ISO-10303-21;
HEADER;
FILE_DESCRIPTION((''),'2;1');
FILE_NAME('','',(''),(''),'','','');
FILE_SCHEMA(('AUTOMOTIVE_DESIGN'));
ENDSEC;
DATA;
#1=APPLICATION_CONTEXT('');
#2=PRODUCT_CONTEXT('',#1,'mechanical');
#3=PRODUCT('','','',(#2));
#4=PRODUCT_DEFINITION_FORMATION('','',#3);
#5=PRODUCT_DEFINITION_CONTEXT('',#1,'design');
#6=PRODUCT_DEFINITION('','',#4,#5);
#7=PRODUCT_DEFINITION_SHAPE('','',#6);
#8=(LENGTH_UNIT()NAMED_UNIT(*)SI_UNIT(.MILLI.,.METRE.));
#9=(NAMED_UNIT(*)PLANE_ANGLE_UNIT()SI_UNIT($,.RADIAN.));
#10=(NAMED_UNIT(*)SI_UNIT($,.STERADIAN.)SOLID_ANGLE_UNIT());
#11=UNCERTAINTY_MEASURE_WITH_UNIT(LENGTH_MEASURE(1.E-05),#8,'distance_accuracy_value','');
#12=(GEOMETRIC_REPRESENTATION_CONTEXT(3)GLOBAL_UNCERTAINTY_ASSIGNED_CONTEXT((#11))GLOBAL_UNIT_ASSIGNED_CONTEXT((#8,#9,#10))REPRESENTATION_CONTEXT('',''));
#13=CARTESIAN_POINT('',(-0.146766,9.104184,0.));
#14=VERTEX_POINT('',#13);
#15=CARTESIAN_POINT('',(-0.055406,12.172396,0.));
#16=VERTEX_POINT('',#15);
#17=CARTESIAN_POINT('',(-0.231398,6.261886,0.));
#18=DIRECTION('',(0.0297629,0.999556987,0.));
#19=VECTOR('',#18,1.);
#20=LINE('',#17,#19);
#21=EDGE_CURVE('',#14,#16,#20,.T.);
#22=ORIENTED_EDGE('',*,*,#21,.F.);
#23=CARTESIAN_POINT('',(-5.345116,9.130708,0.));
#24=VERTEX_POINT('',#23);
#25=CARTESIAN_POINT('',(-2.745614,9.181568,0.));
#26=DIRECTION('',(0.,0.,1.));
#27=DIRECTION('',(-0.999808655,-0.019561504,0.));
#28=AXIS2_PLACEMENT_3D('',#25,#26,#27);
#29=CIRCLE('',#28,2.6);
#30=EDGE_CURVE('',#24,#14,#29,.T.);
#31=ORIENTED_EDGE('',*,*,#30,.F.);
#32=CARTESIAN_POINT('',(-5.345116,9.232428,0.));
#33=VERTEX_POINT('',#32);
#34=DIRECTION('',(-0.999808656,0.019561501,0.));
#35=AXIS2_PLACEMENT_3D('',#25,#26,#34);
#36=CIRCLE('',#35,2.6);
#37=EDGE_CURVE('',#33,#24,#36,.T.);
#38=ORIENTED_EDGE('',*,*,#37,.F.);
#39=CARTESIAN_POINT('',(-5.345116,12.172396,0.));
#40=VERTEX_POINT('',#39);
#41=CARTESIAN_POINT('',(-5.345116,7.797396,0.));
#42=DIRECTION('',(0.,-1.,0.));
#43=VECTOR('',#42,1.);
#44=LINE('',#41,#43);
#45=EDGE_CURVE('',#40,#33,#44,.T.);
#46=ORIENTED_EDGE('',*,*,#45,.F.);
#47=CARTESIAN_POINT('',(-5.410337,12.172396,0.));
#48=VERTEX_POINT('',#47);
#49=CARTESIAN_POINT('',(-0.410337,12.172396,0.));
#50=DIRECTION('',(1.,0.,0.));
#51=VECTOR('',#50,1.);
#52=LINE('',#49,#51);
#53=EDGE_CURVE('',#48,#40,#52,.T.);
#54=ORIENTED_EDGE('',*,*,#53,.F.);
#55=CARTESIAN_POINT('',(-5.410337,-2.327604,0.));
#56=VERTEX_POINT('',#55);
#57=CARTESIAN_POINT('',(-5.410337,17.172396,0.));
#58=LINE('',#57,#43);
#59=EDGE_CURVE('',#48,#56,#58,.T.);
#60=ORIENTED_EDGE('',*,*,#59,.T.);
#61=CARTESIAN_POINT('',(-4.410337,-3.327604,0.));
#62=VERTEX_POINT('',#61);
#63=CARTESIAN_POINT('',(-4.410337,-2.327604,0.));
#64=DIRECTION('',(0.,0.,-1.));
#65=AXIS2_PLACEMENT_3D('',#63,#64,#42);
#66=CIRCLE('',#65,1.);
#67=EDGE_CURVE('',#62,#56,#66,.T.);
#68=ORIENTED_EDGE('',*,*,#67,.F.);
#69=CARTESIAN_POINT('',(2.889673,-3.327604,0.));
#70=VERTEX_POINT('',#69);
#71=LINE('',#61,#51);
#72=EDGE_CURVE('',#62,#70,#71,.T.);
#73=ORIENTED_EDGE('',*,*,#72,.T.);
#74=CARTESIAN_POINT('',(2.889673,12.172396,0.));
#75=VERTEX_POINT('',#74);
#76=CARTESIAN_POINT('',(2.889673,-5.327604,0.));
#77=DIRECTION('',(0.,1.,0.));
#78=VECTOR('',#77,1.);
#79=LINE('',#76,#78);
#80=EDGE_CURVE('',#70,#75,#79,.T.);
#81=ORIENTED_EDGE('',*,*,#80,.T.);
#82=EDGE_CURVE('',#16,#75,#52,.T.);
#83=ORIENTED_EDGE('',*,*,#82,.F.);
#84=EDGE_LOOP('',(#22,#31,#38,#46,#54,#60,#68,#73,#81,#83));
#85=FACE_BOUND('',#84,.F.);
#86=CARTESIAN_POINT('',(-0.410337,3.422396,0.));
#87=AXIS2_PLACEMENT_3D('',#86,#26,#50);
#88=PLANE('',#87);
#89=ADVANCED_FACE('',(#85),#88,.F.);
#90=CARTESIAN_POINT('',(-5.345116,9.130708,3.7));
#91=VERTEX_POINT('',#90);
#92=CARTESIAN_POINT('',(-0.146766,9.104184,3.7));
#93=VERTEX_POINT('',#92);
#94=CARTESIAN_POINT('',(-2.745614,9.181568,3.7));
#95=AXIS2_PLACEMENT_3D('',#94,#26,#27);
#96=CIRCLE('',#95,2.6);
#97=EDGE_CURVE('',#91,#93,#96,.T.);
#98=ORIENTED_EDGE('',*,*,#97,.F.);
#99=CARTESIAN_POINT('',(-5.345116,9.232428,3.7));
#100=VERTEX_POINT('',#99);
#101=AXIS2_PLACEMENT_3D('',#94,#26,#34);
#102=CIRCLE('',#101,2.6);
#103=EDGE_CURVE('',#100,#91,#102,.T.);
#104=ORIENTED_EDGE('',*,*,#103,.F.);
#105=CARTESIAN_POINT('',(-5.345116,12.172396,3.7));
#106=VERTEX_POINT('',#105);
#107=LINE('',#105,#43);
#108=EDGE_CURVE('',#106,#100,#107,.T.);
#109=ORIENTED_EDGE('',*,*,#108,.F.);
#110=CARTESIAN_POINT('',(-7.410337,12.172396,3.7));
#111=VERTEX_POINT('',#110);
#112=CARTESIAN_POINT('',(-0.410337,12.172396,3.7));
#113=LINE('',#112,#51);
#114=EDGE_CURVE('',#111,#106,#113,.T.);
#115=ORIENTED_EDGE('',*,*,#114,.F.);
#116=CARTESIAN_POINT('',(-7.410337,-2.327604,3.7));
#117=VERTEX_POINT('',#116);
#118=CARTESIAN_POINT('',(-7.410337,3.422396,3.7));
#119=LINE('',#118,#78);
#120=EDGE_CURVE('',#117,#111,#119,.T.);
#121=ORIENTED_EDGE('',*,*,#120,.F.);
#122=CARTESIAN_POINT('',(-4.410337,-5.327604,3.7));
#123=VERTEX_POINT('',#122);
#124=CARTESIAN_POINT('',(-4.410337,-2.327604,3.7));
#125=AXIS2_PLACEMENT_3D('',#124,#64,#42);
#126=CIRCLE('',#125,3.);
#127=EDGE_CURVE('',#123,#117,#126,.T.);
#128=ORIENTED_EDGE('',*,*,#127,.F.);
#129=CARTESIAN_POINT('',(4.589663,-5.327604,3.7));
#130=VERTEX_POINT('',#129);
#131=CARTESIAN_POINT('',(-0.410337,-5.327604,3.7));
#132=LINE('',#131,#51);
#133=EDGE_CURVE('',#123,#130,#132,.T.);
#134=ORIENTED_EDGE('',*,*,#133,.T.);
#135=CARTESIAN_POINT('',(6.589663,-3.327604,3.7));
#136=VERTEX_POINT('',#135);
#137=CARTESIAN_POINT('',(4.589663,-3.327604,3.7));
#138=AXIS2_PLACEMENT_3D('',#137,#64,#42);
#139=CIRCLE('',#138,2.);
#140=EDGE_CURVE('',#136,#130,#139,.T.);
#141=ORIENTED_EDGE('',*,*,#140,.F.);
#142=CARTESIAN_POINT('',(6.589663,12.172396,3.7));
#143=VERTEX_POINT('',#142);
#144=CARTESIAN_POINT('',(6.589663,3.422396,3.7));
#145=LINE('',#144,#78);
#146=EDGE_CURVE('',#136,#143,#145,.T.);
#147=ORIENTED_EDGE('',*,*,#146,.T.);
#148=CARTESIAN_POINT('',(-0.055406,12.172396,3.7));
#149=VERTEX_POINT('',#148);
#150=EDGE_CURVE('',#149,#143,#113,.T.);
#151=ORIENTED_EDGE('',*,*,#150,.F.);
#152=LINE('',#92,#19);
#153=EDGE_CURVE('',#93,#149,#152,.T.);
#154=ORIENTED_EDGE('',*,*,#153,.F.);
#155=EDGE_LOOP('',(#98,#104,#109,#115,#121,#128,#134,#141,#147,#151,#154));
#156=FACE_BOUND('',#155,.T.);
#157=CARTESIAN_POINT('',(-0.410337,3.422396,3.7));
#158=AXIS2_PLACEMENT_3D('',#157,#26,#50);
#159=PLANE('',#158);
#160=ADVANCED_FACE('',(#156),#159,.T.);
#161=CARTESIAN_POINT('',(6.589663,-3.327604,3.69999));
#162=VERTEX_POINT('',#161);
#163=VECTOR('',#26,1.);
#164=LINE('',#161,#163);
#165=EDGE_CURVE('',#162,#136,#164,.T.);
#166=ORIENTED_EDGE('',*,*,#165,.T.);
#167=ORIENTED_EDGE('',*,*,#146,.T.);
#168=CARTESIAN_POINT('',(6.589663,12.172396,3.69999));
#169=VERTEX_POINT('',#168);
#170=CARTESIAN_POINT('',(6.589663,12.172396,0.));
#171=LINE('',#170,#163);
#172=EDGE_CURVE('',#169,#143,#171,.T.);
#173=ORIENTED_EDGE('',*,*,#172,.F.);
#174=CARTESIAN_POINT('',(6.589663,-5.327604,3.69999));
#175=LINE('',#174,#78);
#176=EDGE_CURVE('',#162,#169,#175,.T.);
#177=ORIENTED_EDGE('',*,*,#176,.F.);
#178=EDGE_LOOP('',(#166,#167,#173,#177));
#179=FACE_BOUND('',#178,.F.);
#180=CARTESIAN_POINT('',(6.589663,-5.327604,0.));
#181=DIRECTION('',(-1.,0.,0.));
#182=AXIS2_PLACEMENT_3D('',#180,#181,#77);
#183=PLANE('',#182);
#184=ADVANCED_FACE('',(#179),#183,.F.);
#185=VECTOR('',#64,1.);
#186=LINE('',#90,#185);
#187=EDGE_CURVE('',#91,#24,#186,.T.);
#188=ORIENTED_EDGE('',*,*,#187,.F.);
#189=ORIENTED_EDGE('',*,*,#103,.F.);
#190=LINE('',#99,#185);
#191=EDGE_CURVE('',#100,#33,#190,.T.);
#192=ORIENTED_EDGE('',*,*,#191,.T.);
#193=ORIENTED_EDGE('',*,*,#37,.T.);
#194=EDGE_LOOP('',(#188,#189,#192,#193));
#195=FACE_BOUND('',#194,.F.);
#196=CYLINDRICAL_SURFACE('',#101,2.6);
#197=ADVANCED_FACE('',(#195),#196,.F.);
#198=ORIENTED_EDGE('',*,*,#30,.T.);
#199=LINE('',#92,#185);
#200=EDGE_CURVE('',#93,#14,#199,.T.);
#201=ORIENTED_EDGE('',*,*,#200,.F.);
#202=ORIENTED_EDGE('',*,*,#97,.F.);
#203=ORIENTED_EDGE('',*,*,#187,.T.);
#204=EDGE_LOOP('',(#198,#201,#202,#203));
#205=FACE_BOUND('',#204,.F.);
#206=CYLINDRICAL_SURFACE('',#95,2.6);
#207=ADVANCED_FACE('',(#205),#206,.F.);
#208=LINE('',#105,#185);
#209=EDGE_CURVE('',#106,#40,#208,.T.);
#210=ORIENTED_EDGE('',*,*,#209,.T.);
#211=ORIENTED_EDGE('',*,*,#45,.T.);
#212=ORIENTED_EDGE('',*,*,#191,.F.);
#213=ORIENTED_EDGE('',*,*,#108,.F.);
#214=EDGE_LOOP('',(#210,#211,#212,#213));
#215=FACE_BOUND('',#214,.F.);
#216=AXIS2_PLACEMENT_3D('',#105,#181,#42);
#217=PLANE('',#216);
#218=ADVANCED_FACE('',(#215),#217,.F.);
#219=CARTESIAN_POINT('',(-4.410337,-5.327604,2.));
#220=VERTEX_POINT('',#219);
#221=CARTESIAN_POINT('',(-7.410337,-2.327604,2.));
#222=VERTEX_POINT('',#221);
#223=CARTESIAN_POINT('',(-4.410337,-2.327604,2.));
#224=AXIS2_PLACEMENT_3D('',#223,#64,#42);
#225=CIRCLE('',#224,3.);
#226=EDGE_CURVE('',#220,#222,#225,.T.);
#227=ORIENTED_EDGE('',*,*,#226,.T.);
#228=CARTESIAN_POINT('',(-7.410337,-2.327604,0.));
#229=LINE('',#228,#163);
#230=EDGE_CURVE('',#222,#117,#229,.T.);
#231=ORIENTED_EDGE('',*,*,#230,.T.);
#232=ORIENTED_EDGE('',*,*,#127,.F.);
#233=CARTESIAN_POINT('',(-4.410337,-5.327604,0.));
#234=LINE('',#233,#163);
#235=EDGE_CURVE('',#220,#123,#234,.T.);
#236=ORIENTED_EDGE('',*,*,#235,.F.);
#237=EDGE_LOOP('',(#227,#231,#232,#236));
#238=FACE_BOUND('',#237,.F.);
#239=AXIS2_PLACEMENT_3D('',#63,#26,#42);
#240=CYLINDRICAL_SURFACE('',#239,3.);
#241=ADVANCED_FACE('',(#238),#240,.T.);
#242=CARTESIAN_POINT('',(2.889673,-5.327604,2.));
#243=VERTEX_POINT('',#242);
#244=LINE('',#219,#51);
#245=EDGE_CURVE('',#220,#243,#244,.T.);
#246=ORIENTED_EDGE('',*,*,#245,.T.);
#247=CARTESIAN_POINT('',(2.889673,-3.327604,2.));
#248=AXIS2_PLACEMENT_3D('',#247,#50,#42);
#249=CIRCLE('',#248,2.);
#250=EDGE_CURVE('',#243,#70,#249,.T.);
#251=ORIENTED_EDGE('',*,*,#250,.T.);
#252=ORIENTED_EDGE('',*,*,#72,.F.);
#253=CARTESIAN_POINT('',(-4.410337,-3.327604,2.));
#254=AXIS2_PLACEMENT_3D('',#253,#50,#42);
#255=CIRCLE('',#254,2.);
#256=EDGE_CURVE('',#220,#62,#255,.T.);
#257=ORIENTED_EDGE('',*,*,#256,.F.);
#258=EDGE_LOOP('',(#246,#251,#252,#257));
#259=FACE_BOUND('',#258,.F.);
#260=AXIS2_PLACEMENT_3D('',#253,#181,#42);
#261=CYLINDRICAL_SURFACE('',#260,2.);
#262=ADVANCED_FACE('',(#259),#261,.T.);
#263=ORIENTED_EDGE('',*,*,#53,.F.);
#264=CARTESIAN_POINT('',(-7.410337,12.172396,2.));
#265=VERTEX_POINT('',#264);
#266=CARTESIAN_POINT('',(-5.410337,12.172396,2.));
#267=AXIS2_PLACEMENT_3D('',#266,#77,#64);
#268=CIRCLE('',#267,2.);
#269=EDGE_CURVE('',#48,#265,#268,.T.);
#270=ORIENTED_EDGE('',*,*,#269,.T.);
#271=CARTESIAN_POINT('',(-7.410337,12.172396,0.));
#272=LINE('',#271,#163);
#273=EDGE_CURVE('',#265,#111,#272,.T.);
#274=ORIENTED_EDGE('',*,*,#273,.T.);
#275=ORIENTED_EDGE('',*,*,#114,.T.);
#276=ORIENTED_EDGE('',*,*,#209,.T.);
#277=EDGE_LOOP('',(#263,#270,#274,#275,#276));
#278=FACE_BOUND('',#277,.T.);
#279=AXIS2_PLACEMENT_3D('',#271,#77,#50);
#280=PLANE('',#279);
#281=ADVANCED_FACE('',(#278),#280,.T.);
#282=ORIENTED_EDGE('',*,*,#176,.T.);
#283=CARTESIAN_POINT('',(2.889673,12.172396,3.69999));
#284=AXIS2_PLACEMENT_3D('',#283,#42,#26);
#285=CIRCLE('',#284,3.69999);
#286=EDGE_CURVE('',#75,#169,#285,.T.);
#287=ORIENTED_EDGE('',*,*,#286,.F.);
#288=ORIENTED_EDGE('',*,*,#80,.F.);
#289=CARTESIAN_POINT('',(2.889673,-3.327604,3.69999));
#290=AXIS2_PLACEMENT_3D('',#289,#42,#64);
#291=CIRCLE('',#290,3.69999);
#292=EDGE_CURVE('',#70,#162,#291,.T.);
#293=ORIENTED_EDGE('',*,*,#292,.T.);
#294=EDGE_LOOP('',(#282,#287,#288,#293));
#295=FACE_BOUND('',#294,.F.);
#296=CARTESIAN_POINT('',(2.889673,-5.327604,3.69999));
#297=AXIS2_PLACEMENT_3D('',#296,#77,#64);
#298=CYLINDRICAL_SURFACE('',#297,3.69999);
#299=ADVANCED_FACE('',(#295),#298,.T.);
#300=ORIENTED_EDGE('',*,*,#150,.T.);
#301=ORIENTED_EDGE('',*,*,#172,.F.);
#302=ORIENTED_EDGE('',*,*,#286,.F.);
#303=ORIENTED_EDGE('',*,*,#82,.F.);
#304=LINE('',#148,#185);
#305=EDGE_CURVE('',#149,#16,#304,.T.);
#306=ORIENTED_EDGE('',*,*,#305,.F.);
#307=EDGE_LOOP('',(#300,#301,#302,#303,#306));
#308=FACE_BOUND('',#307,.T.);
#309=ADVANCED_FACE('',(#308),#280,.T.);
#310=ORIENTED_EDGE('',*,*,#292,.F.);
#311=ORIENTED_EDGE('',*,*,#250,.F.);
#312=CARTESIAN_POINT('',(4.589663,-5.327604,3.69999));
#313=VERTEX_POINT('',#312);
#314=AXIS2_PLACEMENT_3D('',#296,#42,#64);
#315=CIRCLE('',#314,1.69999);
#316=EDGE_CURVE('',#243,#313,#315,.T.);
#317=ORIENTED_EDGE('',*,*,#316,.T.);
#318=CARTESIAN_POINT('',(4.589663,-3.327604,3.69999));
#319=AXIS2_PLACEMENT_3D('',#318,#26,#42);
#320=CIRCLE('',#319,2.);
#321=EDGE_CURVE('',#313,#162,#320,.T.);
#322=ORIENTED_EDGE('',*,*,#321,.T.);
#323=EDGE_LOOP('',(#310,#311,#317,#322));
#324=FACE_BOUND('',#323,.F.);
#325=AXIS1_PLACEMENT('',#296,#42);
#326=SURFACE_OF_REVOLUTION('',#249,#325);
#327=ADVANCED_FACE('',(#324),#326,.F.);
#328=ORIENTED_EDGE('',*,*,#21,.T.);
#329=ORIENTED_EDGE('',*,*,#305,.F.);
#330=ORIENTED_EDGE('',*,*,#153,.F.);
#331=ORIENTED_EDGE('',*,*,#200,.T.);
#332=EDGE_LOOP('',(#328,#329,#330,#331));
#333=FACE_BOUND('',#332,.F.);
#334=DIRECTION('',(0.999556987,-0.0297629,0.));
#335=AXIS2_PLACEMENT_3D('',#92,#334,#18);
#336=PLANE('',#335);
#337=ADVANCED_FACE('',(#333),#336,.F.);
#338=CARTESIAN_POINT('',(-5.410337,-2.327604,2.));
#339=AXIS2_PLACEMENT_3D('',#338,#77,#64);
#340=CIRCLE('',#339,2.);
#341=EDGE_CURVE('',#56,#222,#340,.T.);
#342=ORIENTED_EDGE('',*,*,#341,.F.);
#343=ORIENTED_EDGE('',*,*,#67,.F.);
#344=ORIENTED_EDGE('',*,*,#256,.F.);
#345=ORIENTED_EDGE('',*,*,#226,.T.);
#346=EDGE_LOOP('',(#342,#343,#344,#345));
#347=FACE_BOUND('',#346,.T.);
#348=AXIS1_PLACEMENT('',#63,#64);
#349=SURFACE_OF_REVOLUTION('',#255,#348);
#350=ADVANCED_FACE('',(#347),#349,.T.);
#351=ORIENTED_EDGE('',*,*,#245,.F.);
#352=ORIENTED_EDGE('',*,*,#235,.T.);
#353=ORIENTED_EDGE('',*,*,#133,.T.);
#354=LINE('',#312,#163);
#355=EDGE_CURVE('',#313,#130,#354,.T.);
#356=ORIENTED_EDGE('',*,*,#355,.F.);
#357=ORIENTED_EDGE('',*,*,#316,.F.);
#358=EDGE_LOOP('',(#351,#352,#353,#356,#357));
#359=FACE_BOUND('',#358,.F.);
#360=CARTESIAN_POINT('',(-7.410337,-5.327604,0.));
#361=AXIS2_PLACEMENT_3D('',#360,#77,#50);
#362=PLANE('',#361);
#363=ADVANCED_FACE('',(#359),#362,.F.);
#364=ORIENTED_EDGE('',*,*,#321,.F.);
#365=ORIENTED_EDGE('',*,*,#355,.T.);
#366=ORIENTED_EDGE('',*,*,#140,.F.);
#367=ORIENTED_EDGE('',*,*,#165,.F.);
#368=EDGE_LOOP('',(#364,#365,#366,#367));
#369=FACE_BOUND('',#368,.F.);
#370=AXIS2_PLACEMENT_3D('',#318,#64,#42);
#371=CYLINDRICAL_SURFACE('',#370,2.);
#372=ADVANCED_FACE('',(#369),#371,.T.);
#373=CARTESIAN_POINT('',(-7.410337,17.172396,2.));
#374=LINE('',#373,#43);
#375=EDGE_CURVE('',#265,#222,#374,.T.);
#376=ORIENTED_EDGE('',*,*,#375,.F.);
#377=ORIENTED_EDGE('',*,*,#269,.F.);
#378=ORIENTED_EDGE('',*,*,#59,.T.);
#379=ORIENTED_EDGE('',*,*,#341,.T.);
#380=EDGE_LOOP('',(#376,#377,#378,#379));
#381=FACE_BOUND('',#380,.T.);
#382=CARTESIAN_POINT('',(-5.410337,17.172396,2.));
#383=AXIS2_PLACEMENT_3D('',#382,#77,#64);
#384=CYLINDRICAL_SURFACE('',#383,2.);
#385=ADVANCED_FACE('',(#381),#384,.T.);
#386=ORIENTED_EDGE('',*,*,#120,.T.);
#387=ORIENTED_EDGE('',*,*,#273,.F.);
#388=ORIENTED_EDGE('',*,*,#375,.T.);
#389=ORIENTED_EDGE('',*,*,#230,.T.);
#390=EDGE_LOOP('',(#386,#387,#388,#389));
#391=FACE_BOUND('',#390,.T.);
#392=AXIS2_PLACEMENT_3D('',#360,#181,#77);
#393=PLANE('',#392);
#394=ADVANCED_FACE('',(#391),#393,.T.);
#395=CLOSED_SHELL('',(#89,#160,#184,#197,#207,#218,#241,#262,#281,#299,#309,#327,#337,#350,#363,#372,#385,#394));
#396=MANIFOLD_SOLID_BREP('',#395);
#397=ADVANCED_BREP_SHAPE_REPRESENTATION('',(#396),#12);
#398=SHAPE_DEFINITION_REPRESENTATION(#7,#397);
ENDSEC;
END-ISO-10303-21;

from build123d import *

# Parameters (mm, degrees)
F0_W         = 14
F0_H         = 17.5
F1_DEPTH     = 3.7
F3_DEPTH     = 5.4
F4_R         = 3.69999
F5_R         = 3
F6_T1_DEPTH  = 7.30001
F6_T3_DEPTH  = 5.00001
F6_T5_DEPTH  = 19.5
F6_T8_ANGLE  = 90
F6_T10_ANGLE = 90


# Not quite as in the source:
# - a fillet or chamfer that OpenCascade refuses, or shapes differently, is made with other operations: its cross-section is extruded or revolved along the edge and cut away or added
# - a fillet or chamfer is up to 0.001 mm smaller than in the source, because OpenCascade refuses the exact size


with BuildPart() as f1:
    # F0 (on Top) → F1 (new body)
    with BuildSketch(Plane.XY):
        with Locations((-0.4103374667, 3.4223956802)):
            Rectangle(F0_W, F0_H)
    extrude(amount=F1_DEPTH)

    # F2 (on face) → F3 (cut)
    with BuildSketch(Plane.XY.offset(3.7)):
        with BuildLine():
            Line((-5.3451164257, 9.1307080224), (-5.3451164257, 9.2324278445))
            ThreePointArc((-5.3451164257, 9.2324278445), (-5.3456139214, 9.1815679334), (-5.3451164257, 9.1307080224))
        make_face()
        with BuildLine():
            Line((-5.3451164257, 12.1723956802), (-5.3451164257, 9.2324278445))
            Line((-5.3451164257, 9.2324278445), (-5.3451164257, 9.1307080224))
            ThreePointArc((-5.3451164257, 9.1307080224), (-2.7588797704, 6.5816017765), (-0.1467657558, 9.1041843944))
            Line((-0.1467657558, 9.1041843944), (-0.055406418, 12.1723956802))
            Line((-0.055406418, 12.1723956802), (-5.3451164257, 12.1723956802))
        make_face()
    extrude(amount=-F3_DEPTH, mode=Mode.SUBTRACT)

    # F4 (radius 3.7 in the source; OpenCascade refuses exactly that, so slightly less here)
    f4_edges = [f1.edges().sort_by_distance(p)[0] for p in [
        (6.589663, 3.422396, 0),
    ]]
    fillet(f4_edges, radius=F4_R)

    # F5
    f5_edges = [f1.edges().sort_by_distance(p)[0] for p in [
        (-7.410337, -5.327604, 1.85),
    ]]
    fillet(f5_edges, radius=F5_R)

    # F6: fillet of radius 2 on 1 edges, made by hand

    # F6_s2 → F6_t1 (cut)
    with BuildSketch(Plane.YZ.offset(-4.4103374667)):
        with BuildLine():
            ThreePointArc((-5.3276043198, 2), (-4.7418178821, 0.5857864376), (-3.3276043198, 0))
            Line((-3.3276043198, 0), (-5.3276043198, 0))
            Line((-5.3276043198, 0), (-5.3276043198, 2))
        make_face()
    extrude(amount=F6_T1_DEPTH, mode=Mode.SUBTRACT)

    # F6_s4 → F6_t3 (cut)
    with BuildSketch(Plane.XY.offset(3.69999)):
        with BuildLine():
            ThreePointArc((4.5896625333, -5.3276043198), (6.0038760956, -4.7418178821), (6.5896625333, -3.3276043198))
            Line((6.5896625333, -3.3276043198), (6.5896625333, -5.3276043198))
            Line((6.5896625333, -5.3276043198), (4.5896625333, -5.3276043198))
        make_face()
    extrude(amount=F6_T3_DEPTH, mode=Mode.SUBTRACT)

    # F6_s6 → F6_t5 (cut)
    with BuildSketch(Plane.XZ.offset(-17.1723956802)):
        with BuildLine():
            ThreePointArc((-5.4103374667, 0), (-6.8245510291, 0.5857864376), (-7.4103374667, 2))
            Line((-7.4103374667, 2), (-7.4103374667, 0))
            Line((-7.4103374667, 0), (-5.4103374667, 0))
        make_face()
    extrude(amount=F6_T5_DEPTH, mode=Mode.SUBTRACT)

    # F6_s7 → F6_t8 (revolve, cut)
    with BuildSketch(Plane.YZ.offset(2.8896725333)):
        with BuildLine():
            ThreePointArc((-5.3276043198, 2), (-4.7418178821, 0.5857864376), (-3.3276043198, 0))
            Line((-3.3276043198, 0), (-5.3276043198, 0))
            Line((-5.3276043198, 0), (-5.3276043198, 2))
        make_face()
    revolve(axis=Axis((2.8896725333, -5.3276043198, 3.69999), (0, -1, 0)), revolution_arc=F6_T8_ANGLE, mode=Mode.SUBTRACT)

    # F6_s9 → F6_t10 (revolve, cut)
    with BuildSketch(Plane.YZ.offset(-4.4103374667)):
        with BuildLine():
            ThreePointArc((-5.3276043198, 2), (-4.7418178821, 0.5857864376), (-3.3276043198, 0))
            Line((-3.3276043198, 0), (-5.3276043198, 0))
            Line((-5.3276043198, 0), (-5.3276043198, 2))
        make_face()
    revolve(axis=Axis((-4.4103374667, -2.3276043198, 0), (0, 0, -1)), revolution_arc=F6_T10_ANGLE, mode=Mode.SUBTRACT)


solid = f1.part
